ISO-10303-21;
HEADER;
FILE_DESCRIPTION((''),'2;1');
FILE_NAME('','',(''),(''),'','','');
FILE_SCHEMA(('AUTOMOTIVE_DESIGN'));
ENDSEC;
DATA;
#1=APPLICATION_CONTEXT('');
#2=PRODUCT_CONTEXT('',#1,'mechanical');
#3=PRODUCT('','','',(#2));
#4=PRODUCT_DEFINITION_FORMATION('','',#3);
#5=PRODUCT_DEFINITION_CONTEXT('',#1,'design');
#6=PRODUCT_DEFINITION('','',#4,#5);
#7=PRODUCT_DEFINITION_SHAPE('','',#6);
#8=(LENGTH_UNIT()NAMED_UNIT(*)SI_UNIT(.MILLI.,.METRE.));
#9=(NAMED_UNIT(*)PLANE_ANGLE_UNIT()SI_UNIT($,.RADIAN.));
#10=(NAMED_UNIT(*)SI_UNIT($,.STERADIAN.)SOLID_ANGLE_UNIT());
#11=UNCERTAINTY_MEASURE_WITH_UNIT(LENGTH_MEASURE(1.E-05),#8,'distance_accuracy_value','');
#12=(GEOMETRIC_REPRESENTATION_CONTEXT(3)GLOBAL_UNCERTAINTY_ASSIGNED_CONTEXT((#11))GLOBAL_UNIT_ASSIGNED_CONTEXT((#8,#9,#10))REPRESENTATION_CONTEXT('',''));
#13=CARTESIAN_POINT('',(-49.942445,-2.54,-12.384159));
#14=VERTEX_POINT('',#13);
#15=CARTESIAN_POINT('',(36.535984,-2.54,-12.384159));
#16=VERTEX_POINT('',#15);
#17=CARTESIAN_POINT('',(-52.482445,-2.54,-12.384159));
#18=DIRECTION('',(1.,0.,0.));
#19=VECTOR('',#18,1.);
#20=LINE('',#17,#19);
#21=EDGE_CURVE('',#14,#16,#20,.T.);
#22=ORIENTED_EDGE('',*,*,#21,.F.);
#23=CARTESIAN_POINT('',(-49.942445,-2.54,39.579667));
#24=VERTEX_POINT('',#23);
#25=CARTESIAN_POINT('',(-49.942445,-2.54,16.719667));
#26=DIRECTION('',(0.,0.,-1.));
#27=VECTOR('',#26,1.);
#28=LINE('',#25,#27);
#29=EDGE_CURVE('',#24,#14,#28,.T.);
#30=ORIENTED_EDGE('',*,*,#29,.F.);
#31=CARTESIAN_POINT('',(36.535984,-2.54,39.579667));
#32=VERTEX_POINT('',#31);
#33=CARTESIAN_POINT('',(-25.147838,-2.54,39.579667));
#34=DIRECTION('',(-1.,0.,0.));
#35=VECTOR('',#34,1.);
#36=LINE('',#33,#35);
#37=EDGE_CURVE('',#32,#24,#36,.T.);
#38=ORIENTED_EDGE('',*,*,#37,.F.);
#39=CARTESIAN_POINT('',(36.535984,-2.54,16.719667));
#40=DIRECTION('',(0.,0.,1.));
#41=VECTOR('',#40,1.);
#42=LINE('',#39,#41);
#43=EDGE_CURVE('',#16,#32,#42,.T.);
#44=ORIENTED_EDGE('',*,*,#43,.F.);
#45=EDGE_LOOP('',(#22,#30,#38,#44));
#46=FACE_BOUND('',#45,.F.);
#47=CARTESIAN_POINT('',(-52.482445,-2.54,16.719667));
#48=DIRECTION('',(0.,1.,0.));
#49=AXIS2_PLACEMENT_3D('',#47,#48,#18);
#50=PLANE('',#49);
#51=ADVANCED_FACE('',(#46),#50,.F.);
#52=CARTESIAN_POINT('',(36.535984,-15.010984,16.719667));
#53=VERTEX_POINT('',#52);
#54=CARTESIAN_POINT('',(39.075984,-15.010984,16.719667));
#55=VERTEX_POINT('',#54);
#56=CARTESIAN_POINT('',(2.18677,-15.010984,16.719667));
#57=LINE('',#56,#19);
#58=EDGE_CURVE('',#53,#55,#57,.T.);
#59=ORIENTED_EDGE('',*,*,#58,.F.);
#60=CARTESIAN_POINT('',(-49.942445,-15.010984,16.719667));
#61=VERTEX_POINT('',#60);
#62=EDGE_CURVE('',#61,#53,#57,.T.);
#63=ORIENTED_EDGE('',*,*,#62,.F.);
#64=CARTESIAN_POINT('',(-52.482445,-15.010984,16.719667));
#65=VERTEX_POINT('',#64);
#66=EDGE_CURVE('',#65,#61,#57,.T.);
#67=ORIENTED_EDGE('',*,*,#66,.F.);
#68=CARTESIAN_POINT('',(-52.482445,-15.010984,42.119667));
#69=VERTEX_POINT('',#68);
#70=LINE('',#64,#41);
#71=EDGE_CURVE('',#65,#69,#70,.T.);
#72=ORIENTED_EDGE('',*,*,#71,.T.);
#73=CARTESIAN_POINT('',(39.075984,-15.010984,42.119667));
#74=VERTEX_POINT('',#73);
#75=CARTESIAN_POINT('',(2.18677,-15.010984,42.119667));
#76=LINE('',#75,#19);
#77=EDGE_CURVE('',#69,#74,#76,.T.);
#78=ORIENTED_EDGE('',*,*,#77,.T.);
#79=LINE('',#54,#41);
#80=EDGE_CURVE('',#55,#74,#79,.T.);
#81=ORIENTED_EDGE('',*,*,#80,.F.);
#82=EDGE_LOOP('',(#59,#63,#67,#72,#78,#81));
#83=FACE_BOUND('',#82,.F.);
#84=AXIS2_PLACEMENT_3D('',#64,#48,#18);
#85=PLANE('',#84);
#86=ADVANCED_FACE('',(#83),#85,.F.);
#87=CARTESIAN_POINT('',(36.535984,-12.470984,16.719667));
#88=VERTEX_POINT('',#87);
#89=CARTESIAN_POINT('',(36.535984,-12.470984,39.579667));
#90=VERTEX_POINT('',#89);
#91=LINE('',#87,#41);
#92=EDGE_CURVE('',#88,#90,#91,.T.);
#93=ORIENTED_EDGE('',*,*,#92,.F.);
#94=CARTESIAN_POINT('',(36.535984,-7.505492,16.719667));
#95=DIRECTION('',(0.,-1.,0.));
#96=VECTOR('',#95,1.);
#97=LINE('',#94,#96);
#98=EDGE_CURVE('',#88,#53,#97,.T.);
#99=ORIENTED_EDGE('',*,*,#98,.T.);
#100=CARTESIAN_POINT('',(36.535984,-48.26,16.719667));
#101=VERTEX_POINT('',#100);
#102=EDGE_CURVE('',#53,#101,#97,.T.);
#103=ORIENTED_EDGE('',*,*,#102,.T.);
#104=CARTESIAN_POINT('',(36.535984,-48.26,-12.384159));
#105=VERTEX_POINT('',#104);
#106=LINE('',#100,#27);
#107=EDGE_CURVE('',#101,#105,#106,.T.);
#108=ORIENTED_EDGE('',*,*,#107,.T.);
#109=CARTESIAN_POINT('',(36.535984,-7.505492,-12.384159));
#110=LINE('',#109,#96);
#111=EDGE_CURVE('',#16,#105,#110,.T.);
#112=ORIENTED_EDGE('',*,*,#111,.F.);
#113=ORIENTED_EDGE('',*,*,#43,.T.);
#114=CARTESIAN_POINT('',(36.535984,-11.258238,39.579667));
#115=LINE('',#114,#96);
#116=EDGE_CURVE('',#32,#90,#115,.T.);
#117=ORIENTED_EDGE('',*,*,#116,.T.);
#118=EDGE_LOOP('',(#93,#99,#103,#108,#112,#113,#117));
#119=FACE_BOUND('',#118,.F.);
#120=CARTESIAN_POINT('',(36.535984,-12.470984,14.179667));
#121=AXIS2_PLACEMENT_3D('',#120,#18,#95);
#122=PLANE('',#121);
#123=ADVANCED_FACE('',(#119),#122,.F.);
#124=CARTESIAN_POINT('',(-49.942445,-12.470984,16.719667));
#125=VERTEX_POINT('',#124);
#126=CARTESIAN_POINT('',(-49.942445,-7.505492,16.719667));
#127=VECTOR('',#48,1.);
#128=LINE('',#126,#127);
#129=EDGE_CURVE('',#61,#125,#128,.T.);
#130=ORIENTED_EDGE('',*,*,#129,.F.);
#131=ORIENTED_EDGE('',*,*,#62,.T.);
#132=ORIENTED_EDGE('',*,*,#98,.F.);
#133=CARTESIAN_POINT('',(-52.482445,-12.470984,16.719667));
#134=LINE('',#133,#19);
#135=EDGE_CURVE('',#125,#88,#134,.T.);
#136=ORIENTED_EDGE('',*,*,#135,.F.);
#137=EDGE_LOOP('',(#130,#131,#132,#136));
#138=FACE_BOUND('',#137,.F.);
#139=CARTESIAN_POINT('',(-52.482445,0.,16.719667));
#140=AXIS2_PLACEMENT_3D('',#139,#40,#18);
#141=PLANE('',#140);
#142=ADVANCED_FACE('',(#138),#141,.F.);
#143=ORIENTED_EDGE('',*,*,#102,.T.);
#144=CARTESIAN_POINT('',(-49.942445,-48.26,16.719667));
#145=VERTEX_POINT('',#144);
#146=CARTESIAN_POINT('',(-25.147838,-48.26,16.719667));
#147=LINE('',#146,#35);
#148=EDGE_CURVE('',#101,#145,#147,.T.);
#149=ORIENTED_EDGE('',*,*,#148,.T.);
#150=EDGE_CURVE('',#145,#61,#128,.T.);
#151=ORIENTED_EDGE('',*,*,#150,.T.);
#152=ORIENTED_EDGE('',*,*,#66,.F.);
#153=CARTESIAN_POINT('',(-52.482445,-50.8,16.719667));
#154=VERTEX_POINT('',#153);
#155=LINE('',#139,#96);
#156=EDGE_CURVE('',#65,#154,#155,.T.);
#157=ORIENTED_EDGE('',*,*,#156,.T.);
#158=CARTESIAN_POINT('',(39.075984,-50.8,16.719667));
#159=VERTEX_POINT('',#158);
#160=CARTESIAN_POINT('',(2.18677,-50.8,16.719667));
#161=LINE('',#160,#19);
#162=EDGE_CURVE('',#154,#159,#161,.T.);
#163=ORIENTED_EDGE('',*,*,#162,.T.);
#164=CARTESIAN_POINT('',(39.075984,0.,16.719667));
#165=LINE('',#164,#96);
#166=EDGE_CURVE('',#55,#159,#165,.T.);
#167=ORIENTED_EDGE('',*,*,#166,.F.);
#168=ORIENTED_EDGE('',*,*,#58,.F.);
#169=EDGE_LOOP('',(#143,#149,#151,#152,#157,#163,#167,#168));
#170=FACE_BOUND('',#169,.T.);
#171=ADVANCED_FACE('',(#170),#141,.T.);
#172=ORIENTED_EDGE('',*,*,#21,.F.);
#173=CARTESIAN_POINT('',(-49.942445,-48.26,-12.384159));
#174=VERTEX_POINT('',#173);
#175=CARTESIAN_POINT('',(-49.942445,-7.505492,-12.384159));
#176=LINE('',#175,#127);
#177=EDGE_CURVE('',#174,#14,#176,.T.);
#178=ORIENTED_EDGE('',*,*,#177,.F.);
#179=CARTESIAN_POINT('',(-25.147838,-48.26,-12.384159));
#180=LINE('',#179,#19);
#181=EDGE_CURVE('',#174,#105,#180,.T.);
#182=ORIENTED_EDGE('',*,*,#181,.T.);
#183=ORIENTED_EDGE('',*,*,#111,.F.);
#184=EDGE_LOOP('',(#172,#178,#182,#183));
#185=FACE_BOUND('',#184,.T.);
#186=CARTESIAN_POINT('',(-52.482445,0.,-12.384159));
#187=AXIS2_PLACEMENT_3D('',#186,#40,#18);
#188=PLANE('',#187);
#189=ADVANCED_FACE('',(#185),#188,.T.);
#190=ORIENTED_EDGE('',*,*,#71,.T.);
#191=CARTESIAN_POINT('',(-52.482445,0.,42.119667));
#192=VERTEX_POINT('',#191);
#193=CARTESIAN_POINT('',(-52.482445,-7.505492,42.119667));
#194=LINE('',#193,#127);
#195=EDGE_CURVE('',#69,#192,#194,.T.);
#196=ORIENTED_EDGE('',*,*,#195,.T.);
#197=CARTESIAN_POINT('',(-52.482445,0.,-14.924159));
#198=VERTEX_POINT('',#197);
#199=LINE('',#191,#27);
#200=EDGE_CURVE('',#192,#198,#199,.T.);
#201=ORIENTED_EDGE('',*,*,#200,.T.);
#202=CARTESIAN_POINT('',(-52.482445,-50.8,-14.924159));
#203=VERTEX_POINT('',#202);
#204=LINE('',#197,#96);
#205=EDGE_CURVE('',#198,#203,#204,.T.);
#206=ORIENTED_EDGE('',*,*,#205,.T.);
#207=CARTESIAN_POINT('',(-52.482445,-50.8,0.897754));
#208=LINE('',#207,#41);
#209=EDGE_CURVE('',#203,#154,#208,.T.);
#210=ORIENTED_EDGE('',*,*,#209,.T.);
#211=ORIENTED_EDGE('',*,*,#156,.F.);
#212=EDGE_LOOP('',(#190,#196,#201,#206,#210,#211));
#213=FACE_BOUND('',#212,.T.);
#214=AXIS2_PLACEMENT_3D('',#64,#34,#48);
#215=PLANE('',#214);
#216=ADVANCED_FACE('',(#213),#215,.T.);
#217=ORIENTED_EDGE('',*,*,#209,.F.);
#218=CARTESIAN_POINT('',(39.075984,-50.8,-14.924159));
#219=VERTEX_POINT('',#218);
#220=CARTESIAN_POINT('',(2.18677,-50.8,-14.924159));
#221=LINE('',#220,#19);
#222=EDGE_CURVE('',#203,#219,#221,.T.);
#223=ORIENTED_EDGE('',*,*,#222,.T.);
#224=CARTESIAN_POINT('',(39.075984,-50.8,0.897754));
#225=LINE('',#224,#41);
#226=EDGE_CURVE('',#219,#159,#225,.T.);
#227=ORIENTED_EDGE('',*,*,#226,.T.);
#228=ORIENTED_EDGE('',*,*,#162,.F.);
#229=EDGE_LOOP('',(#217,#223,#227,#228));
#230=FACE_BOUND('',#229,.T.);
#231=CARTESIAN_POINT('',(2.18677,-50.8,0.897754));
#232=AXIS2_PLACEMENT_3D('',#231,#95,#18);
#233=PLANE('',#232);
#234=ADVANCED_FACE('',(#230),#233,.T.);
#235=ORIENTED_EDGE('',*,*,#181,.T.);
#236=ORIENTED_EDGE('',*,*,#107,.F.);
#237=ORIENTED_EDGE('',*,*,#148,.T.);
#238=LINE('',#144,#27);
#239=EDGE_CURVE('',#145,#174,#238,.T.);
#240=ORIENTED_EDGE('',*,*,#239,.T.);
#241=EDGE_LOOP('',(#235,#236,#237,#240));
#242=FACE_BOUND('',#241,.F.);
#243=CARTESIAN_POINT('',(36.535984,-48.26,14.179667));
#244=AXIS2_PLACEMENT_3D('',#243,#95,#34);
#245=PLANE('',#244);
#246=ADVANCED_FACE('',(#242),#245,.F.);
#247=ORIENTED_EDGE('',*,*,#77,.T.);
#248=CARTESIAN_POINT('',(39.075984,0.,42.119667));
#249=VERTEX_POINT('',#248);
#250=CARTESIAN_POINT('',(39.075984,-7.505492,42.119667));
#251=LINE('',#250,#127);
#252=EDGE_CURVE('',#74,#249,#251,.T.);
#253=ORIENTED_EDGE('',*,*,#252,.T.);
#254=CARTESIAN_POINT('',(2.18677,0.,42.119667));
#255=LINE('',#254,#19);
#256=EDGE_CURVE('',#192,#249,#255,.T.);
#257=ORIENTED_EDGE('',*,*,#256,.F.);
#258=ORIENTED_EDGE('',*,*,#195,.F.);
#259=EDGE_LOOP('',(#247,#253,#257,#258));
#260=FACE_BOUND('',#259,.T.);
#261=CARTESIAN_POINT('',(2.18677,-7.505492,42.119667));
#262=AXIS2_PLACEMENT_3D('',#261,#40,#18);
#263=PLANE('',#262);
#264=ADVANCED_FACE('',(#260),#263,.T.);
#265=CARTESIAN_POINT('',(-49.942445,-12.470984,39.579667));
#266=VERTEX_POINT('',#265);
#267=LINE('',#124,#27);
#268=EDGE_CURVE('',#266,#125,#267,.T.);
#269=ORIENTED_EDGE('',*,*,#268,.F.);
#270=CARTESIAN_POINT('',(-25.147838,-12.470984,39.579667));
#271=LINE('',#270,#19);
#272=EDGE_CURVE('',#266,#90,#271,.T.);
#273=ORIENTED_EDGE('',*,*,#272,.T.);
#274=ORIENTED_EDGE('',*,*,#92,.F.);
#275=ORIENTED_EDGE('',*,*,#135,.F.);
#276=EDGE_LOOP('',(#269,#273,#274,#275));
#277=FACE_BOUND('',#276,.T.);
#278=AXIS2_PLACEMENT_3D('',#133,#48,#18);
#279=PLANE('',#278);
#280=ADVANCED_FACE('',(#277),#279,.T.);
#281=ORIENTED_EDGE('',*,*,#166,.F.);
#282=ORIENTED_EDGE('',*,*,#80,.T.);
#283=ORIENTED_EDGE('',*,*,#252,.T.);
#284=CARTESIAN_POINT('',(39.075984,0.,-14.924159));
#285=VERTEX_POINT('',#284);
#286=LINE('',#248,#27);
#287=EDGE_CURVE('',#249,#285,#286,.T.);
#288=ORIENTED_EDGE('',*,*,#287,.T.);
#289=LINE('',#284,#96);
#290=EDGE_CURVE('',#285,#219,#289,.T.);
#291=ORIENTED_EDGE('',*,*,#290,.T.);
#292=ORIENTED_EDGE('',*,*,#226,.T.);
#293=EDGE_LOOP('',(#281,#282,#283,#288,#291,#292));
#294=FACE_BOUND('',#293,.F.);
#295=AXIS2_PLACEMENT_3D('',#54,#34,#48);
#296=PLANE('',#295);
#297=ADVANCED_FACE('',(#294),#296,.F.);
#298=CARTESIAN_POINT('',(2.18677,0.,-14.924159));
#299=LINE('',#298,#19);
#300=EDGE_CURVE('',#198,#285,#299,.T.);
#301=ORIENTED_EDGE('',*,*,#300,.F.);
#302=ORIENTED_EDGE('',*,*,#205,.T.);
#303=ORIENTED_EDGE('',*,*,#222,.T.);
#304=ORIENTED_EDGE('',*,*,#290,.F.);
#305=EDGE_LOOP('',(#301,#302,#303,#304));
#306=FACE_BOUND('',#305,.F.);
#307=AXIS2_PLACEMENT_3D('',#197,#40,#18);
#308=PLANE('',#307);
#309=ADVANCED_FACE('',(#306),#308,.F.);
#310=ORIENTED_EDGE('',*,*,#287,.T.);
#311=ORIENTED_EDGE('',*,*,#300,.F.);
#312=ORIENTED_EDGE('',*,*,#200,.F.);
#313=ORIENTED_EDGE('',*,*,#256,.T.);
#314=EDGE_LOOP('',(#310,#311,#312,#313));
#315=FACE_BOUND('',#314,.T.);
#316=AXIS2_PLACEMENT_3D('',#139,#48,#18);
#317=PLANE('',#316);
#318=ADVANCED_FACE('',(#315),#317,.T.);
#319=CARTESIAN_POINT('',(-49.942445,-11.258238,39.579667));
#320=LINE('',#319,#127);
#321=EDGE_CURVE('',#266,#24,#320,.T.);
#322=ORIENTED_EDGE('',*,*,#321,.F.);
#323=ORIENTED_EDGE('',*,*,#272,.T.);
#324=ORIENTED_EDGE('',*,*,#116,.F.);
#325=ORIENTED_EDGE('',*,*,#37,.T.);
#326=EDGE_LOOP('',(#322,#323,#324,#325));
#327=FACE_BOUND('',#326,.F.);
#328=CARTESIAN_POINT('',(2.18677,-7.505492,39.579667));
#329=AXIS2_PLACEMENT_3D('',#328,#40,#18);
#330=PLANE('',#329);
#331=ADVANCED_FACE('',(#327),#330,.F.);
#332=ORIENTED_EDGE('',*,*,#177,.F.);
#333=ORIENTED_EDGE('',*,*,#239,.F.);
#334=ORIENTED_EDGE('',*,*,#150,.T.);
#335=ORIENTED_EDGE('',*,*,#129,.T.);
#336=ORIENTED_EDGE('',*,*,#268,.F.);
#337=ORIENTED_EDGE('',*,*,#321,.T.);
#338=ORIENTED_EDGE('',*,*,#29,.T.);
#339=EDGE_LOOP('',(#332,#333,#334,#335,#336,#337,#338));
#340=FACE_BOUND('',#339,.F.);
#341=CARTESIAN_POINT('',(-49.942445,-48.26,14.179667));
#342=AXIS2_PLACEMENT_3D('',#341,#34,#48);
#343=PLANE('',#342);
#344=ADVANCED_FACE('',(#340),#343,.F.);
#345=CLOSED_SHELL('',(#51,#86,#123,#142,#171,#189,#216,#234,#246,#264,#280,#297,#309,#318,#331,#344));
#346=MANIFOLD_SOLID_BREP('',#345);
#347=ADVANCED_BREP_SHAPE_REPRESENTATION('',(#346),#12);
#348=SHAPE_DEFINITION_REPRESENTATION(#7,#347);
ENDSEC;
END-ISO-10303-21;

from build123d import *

# Parameters (mm, degrees)
F0_W     = 109.3384288251
F0_H     = 31.6438265145
F1_DEPTH = 50.8
F2_W     = 109.3384288251
F2_H     = 15.0109836832
F3_DEPTH = 25.4
F4_DEPTH = 17.78
F5_T     = -2.54


# Not quite as in the source:
# - a shell that OpenCascade refuses in one call is made with other operations: the cavity is built on its own and cut out


with BuildPart() as f1:
    # F0 (on Front) → F1 (new body)
    with BuildSketch(Plane.XZ):
        with Locations((2.1867696196, 0.8977539837)):
            Rectangle(F0_W, F0_H)
    extrude(amount=F1_DEPTH)

    # F2 (on face) → F3 (join)
    with BuildSketch(Plane.XY.offset(16.719667241)):
        with Locations((2.1867696196, -7.5054918416)):
            Rectangle(F2_W, F2_H)
    extrude(amount=F3_DEPTH)

    # F4 (cut): a face of the model
    f4_faces = [f1.faces().sort_by_distance(p)[0] for p in [
        (56.8559840322, -21.9693633853, 6.3658182119),
    ]]
    extrude(f4_faces, amount=-F4_DEPTH, mode=Mode.SUBTRACT)

    # F5: a shell. OpenCascade refuses it in one call, so the cavity is built on its own and cut out:
    # the body offset inwards by the wall thickness, plus a prism from it out through each open face.
    f5_core = offset(f1.part, amount=F5_T, kind=Kind.INTERSECTION, mode=Mode.PRIVATE)
    f5_exits = [f5_core.faces().sort_by_distance(p)[0] for p in [
        (-6.70323, -30.365492, 14.179667),
    ]]
    add(f5_core, mode=Mode.SUBTRACT)
    extrude(f5_exits, amount=-F5_T, mode=Mode.SUBTRACT)


solid = f1.part
